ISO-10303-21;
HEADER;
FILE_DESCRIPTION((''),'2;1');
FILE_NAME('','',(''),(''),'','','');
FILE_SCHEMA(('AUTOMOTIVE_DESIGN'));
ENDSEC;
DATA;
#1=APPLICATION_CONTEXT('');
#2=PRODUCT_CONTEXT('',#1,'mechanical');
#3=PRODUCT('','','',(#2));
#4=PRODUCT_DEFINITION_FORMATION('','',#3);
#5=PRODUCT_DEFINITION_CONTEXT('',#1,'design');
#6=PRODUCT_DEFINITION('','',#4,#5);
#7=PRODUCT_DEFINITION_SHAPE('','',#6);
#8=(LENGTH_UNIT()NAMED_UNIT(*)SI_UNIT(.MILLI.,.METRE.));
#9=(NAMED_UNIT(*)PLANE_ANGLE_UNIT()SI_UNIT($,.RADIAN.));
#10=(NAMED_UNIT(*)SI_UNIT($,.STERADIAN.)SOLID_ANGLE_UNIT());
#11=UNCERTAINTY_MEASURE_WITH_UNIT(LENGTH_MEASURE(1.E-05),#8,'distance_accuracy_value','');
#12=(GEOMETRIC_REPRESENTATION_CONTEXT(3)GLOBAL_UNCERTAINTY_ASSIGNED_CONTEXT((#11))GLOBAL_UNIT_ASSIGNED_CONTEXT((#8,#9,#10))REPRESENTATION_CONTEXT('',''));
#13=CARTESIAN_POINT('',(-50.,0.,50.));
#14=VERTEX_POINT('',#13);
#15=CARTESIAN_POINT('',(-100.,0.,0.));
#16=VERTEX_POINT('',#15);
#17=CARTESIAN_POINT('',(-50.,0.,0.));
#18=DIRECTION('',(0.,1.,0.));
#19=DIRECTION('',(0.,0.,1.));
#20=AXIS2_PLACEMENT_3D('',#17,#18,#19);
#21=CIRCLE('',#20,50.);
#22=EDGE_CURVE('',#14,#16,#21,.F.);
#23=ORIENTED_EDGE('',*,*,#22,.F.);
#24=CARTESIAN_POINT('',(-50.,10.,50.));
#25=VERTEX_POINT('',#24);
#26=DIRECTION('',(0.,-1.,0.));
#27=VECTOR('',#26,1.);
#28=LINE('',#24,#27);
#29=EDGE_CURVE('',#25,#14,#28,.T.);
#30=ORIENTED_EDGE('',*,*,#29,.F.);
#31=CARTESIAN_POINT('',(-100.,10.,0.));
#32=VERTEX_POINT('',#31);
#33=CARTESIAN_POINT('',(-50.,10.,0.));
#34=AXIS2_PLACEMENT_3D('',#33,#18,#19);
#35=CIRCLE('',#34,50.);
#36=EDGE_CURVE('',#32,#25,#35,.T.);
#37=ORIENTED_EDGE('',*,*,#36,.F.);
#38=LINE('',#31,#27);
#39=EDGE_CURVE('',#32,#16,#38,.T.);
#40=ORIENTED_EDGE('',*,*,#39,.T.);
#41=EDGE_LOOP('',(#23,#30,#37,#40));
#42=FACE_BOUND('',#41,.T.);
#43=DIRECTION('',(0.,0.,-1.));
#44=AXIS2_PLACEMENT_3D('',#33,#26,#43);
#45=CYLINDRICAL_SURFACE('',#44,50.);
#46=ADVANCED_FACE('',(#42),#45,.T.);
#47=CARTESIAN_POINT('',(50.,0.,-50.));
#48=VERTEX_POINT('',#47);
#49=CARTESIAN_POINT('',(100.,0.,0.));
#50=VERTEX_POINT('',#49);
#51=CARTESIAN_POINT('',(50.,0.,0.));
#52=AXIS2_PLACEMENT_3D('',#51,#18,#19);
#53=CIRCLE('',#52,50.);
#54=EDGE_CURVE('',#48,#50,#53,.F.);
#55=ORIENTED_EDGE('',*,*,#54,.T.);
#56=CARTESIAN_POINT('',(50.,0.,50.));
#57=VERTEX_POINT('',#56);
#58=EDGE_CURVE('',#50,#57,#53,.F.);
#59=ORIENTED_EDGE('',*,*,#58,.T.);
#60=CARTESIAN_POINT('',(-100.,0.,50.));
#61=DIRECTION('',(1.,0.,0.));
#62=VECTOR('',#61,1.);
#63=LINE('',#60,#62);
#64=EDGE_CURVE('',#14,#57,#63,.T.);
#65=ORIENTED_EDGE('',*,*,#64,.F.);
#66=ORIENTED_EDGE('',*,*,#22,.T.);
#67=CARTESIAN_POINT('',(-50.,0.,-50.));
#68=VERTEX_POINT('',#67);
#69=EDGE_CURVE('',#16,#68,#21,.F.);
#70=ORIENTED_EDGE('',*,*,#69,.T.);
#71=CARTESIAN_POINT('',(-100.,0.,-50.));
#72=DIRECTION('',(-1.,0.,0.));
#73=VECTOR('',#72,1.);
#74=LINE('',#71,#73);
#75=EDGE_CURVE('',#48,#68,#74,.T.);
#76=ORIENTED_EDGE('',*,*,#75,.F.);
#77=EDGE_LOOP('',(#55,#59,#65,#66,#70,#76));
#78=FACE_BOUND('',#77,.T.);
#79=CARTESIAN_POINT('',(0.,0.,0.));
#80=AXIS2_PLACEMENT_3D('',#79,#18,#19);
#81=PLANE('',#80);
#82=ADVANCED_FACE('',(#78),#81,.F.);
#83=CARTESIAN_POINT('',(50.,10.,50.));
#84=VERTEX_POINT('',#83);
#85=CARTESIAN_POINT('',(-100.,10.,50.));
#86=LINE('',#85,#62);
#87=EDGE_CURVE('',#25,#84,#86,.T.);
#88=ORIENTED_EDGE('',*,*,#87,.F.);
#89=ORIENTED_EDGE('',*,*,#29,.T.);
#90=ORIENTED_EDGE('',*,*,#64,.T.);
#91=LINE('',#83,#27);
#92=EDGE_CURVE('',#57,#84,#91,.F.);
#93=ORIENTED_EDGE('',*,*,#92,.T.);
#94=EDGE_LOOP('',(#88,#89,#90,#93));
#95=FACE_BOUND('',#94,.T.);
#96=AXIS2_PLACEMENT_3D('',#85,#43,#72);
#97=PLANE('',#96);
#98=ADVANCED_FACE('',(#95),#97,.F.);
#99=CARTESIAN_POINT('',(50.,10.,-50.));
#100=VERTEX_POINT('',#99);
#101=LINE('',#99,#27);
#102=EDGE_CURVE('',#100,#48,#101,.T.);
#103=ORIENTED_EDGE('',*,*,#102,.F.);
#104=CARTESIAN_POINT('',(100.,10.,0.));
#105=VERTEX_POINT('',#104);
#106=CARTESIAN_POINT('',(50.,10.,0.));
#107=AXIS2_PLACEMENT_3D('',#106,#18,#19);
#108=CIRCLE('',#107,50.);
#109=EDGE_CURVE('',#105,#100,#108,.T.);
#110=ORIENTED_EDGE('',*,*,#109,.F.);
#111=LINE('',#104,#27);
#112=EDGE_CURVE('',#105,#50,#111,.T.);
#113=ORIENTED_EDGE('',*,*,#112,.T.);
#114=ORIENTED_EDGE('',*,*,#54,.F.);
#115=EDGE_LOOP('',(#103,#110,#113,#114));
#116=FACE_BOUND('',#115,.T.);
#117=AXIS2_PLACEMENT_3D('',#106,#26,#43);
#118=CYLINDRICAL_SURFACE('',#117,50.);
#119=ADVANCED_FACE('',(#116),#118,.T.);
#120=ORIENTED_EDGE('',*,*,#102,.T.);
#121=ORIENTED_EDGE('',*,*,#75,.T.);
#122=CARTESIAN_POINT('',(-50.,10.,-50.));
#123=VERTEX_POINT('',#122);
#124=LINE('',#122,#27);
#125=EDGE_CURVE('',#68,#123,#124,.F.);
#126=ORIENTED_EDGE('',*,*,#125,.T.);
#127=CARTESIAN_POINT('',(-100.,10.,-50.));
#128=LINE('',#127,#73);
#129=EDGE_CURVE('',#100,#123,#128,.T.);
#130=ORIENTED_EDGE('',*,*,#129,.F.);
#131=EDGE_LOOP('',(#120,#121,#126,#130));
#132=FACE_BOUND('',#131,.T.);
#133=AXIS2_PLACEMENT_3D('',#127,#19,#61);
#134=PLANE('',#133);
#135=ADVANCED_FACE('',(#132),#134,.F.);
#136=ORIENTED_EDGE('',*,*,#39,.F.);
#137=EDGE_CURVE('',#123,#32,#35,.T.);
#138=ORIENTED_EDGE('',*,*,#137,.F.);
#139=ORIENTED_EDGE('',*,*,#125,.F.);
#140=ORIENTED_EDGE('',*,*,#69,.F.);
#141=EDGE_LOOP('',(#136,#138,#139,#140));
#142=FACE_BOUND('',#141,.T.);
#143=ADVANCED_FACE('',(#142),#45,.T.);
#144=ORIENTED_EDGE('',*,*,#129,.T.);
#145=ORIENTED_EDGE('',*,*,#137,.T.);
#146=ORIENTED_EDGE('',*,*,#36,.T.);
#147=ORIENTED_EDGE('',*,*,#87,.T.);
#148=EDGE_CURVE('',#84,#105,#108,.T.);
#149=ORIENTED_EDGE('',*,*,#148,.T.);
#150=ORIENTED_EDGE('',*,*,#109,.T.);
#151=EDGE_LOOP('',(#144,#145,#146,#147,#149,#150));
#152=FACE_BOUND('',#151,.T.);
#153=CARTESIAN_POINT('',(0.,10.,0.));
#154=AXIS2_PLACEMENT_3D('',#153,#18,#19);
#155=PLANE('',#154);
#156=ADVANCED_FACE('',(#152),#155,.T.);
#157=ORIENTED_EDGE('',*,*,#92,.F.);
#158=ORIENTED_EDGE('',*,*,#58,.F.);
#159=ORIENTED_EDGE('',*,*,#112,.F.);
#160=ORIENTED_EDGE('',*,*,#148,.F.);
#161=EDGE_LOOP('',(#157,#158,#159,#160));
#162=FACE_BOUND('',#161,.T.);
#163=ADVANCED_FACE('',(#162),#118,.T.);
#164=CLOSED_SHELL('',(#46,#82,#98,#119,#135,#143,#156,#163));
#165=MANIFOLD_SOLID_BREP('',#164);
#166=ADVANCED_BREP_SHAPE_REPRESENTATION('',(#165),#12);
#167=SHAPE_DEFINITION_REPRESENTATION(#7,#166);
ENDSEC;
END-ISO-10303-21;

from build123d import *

# Parameters (mm, degrees)
SKETCH1_W           = 200
SKETCH1_H           = 100
BOSS_EXTRUDE1_DEPTH = 10
FILLET1_R           = 50


with BuildPart() as part:
    # Sketch1 → Boss-Extrude1 (new body)
    with BuildSketch(Plane(origin=(0, 0, 0), x_dir=(1, 0, 0), z_dir=(0, 1, 0))):
        Rectangle(SKETCH1_W, SKETCH1_H)
    extrude(amount=BOSS_EXTRUDE1_DEPTH)

    # Fillet1
    fillet1_edges = [part.edges().sort_by_distance(p)[0] for p in [
        (100, 5, -50),
        (100, 5, 50),
        (-100, 5, 50),
        (-100, 5, -50),
    ]]
    fillet(fillet1_edges, radius=FILLET1_R - 0.0001)  # a hair under: the kernel refuses the full size


solid = part.part
